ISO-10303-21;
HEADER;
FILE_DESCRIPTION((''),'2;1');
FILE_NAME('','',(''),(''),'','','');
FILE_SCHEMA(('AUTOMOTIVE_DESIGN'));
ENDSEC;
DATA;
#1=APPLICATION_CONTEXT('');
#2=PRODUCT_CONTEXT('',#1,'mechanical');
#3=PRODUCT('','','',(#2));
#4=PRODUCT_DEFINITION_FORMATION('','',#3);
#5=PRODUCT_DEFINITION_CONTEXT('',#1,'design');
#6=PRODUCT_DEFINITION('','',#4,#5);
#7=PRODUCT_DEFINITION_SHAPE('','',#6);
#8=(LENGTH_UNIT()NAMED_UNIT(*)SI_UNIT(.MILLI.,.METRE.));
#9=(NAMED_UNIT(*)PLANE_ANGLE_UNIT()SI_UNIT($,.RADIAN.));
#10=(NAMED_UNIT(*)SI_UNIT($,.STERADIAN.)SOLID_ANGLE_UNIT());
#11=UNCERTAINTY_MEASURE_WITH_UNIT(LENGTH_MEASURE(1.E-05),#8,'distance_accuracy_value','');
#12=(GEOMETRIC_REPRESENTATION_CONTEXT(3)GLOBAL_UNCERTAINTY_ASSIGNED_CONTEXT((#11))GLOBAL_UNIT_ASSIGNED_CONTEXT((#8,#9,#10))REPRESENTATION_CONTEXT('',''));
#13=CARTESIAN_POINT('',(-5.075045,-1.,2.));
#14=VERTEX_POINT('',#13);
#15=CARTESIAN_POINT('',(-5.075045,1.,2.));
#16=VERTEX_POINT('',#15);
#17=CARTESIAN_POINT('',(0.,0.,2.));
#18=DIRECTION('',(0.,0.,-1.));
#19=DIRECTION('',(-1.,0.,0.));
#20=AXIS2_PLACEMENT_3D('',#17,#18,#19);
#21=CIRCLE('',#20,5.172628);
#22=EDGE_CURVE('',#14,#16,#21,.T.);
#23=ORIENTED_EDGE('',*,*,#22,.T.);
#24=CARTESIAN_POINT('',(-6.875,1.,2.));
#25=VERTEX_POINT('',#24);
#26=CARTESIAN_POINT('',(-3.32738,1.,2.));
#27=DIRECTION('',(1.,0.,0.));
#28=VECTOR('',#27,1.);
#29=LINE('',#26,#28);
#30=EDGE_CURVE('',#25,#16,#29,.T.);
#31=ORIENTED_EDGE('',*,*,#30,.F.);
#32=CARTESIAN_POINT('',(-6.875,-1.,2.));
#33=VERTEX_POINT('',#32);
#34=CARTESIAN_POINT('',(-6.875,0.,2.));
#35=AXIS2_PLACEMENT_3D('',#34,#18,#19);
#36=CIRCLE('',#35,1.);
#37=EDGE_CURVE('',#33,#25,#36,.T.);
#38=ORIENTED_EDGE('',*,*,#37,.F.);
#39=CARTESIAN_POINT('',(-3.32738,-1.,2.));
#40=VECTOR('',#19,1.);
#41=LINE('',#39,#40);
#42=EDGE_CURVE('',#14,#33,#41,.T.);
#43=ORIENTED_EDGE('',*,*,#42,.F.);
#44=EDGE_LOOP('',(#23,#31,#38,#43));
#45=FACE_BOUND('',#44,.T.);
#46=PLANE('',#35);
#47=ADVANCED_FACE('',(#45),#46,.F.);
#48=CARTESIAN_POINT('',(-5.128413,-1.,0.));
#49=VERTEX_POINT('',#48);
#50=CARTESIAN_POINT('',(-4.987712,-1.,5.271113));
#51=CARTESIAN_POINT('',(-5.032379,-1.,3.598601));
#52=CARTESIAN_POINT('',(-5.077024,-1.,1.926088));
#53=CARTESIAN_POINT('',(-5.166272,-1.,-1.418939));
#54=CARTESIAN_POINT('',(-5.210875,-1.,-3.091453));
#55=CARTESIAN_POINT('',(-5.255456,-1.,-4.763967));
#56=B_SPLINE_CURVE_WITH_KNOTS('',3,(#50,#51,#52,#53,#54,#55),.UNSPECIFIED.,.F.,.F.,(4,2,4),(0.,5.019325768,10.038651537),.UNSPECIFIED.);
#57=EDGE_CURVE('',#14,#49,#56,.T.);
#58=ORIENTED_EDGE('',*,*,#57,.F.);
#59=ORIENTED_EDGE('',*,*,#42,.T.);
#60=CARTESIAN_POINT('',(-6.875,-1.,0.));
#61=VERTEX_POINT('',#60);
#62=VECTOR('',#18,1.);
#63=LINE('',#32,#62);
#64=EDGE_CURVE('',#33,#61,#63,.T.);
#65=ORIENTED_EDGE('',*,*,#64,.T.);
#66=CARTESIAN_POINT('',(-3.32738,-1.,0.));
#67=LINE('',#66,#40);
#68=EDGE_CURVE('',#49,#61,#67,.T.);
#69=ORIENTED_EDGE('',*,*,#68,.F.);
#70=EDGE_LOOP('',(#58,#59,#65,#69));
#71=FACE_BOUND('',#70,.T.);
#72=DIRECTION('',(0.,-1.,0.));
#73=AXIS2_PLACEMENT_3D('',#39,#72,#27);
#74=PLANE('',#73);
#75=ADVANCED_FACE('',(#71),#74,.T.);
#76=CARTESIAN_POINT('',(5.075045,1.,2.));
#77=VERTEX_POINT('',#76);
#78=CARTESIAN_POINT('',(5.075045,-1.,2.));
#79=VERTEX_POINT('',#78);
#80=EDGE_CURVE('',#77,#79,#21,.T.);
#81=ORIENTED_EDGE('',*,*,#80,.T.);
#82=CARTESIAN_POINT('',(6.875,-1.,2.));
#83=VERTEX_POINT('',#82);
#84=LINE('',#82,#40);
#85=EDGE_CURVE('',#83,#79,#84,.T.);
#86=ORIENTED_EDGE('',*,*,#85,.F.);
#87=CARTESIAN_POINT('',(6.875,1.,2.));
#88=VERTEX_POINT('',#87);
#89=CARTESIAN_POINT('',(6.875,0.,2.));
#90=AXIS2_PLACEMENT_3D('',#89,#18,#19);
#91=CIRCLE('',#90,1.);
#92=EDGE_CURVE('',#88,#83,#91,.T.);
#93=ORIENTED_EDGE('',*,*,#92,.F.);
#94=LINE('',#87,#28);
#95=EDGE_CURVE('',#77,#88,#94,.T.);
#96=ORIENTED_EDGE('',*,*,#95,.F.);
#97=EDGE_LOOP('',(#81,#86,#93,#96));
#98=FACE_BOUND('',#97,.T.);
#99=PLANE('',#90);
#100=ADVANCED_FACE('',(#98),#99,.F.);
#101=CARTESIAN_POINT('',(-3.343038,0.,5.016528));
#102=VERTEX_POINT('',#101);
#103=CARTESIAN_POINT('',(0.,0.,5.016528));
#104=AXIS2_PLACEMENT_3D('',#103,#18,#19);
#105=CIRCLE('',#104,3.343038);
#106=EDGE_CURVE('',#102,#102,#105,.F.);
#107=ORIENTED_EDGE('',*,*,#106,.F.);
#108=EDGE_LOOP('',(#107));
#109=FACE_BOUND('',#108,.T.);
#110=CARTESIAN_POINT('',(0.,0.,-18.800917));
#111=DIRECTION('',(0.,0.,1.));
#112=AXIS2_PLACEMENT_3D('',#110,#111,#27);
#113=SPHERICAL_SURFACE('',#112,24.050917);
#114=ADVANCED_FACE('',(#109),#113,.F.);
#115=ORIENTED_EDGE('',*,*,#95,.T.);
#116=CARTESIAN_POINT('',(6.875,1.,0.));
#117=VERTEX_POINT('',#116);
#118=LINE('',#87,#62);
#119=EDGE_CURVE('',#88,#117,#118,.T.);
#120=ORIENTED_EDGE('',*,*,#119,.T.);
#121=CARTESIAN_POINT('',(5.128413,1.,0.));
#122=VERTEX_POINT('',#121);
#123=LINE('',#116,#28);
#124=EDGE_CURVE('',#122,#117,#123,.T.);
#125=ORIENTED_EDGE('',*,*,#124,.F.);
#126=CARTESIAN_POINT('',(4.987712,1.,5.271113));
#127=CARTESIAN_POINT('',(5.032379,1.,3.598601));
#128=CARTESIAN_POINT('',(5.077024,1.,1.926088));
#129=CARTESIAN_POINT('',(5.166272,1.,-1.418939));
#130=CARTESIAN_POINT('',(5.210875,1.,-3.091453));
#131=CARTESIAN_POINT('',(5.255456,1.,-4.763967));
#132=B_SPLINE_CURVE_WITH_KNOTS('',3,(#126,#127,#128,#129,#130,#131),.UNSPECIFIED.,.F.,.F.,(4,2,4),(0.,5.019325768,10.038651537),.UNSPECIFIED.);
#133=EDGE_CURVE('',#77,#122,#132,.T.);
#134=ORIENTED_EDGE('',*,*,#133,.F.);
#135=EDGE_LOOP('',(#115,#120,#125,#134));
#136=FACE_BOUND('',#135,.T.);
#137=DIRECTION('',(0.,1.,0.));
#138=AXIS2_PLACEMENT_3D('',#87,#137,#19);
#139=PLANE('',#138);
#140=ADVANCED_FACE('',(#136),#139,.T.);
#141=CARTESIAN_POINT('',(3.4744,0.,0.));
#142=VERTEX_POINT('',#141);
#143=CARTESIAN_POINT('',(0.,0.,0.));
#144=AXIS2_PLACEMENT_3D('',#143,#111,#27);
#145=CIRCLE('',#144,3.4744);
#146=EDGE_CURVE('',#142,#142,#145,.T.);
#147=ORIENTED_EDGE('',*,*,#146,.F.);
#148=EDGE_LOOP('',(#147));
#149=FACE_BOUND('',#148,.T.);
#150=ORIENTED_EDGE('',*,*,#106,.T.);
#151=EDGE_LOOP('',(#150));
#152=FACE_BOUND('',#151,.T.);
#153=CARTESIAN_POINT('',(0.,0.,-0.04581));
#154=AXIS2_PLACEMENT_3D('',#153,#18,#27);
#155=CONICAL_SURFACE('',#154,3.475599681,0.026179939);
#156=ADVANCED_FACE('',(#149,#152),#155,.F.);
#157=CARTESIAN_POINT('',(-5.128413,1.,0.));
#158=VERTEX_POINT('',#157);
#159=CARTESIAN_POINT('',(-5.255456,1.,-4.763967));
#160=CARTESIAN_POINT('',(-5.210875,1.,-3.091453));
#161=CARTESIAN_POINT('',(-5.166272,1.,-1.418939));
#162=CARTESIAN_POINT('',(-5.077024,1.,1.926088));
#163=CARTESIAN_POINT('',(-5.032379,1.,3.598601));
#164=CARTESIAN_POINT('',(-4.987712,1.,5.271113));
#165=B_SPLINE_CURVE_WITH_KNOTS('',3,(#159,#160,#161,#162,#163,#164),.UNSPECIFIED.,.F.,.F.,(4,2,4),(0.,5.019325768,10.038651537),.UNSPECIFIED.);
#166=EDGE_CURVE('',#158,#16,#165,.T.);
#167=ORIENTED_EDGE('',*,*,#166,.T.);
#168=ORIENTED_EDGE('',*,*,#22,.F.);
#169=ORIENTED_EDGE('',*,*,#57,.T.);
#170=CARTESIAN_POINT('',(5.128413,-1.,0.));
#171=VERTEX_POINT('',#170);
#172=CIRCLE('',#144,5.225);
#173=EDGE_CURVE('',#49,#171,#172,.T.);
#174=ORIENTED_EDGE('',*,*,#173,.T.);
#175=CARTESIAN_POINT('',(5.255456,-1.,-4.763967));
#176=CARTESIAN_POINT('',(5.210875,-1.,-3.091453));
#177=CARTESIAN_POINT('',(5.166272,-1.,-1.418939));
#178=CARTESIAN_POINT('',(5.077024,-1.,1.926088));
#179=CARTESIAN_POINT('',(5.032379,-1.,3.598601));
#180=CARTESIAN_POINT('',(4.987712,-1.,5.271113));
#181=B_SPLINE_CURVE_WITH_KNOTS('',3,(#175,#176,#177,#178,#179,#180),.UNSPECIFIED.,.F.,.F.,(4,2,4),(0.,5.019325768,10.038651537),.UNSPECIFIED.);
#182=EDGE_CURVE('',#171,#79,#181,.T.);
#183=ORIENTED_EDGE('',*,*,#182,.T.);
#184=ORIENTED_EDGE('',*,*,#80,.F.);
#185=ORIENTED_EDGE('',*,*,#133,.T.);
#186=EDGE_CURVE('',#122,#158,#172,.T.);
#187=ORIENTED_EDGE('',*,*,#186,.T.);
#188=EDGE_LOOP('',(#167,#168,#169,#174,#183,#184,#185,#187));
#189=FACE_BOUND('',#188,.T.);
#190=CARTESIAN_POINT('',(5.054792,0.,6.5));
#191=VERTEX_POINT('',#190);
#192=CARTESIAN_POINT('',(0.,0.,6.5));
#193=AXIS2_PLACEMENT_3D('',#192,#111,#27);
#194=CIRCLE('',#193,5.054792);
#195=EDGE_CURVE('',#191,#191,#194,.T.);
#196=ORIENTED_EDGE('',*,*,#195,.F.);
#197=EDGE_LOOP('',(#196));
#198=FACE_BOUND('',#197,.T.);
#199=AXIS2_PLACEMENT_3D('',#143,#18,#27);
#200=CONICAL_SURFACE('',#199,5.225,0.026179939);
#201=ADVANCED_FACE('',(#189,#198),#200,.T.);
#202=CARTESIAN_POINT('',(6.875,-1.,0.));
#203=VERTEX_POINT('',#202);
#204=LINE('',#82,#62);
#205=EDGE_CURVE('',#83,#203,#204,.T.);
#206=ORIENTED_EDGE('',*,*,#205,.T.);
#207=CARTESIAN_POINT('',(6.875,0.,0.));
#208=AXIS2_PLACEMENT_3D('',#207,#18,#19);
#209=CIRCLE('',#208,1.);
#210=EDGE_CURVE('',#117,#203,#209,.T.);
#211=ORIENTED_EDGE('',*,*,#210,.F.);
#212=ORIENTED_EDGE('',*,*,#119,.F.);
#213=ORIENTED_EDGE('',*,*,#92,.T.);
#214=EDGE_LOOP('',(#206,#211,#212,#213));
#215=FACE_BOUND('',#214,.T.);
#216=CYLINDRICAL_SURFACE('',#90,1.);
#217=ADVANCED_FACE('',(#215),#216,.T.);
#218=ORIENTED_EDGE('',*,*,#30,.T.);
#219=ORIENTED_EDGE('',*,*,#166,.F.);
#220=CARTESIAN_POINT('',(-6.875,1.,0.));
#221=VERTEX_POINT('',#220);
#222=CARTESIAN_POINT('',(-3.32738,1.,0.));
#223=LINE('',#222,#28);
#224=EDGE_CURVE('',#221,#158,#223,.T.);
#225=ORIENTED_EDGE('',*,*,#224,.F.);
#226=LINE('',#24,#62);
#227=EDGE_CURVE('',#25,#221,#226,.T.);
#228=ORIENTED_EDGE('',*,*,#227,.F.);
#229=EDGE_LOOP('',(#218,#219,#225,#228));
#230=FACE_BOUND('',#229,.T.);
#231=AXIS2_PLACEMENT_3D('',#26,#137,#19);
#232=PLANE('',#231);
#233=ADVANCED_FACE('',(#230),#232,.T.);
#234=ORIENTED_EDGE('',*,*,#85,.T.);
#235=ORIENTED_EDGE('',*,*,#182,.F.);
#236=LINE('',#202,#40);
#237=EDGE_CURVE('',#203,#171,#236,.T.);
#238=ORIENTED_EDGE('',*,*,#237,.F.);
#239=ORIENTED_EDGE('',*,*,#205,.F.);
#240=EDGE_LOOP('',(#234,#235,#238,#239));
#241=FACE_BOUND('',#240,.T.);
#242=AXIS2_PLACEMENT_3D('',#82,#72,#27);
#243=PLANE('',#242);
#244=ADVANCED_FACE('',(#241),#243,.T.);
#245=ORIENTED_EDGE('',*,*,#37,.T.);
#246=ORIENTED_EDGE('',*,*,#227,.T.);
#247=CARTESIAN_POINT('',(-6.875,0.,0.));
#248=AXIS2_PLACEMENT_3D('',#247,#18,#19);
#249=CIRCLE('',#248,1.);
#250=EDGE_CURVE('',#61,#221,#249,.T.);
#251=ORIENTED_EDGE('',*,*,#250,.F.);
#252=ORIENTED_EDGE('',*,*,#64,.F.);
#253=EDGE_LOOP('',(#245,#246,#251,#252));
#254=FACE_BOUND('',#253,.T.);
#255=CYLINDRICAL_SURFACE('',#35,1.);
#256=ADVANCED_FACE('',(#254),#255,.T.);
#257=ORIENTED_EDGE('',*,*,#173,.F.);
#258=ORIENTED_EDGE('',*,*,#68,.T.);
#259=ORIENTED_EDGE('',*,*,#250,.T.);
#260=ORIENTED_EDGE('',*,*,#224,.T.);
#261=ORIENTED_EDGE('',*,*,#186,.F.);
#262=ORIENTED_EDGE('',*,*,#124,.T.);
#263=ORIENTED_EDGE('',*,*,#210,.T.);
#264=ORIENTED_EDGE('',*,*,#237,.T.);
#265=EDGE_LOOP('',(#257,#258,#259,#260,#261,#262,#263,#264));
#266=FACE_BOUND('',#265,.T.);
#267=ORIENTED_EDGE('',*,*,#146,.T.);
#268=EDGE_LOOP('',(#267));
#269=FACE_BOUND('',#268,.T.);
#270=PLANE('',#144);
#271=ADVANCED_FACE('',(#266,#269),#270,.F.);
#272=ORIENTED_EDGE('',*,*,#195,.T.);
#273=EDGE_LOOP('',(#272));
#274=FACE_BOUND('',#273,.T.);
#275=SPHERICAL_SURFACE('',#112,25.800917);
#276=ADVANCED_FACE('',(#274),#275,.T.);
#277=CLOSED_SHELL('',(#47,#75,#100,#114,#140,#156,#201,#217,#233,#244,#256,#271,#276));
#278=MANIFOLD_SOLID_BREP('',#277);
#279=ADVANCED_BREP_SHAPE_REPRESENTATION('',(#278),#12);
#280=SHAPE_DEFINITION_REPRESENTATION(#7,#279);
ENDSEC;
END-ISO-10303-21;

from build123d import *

# Parameters (mm, degrees)
SKETCH1_R           = 5.225
BOSS_EXTRUDE1_DEPTH = 6.5
BOSS_EXTRUDE1_TAPER = 1.5
DOME1_FACE_RADIUS   = 5.05479151
DOME1_HEIGHT        = 0.5
BOSS_EXTRUDE2_DEPTH = 2


# Read off the part's stored shape, not the designer's step: Shell1
with BuildPart() as part:
    # Sketch1 → Boss-Extrude1 (new body)
    with BuildSketch(Plane.XY):
        Circle(SKETCH1_R)
    extrude(amount=BOSS_EXTRUDE1_DEPTH, taper=BOSS_EXTRUDE1_TAPER)

    # Dome1: a dome of height H over a round flat face of radius A is a cap of a sphere of radius (A * A + H * H) / (2 * H)
    dome1_r = (DOME1_FACE_RADIUS * DOME1_FACE_RADIUS + DOME1_HEIGHT * DOME1_HEIGHT) / (2 * DOME1_HEIGHT)
    dome1_base = Plane((0, 0, 6.5), z_dir=(0, 0, 1))
    with Locations(dome1_base.offset(DOME1_HEIGHT - dome1_r)):
        dome1_ball = Sphere(dome1_r, mode=Mode.PRIVATE)
    add(split(dome1_ball, bisect_by=dome1_base, keep=Keep.TOP, mode=Mode.PRIVATE))

    # Shell1 outline → Shell1 (revolve, cut)
    with BuildSketch(Plane.XZ):
        with BuildLine():
            Line((3.474400113, 0), (3.343037716, 5.016528444))
            ThreePointArc((3.343037716, 5.016528444), (1.675590205, 5.191561114), (0, 5.25))
            Line((0, 5.25), (0, 0))
            Line((0, 0), (3.474400113, 0))
        make_face()
    revolve(axis=Axis((0, 0, 0), (0, 0, 1)), mode=Mode.SUBTRACT)

    # Sketch3 → Boss-Extrude2 (add)
    with BuildSketch(Plane(origin=(0, 0, 0), x_dir=(-1, 0, 0), z_dir=(0, 0, -1))):
        with BuildLine():
            Line((-6.875, 1), (-3.327379772, 1))
            ThreePointArc((-3.327379772, 1), (-3.474400113, 0), (-3.327379772, -1))
            Line((-3.327379772, -1), (-6.875, -1))
            ThreePointArc((-6.875, -1), (-7.875, 0), (-6.875, 1))
        make_face()
        with BuildLine():
            Line((3.327379772, 1), (6.875, 1))
            ThreePointArc((6.875, 1), (7.875, 0), (6.875, -1))
            Line((6.875, -1), (3.327379772, -1))
            ThreePointArc((3.327379772, -1), (3.474400113, 0), (3.327379772, 1))
        make_face()
    extrude(amount=-BOSS_EXTRUDE2_DEPTH)


solid = part.part
